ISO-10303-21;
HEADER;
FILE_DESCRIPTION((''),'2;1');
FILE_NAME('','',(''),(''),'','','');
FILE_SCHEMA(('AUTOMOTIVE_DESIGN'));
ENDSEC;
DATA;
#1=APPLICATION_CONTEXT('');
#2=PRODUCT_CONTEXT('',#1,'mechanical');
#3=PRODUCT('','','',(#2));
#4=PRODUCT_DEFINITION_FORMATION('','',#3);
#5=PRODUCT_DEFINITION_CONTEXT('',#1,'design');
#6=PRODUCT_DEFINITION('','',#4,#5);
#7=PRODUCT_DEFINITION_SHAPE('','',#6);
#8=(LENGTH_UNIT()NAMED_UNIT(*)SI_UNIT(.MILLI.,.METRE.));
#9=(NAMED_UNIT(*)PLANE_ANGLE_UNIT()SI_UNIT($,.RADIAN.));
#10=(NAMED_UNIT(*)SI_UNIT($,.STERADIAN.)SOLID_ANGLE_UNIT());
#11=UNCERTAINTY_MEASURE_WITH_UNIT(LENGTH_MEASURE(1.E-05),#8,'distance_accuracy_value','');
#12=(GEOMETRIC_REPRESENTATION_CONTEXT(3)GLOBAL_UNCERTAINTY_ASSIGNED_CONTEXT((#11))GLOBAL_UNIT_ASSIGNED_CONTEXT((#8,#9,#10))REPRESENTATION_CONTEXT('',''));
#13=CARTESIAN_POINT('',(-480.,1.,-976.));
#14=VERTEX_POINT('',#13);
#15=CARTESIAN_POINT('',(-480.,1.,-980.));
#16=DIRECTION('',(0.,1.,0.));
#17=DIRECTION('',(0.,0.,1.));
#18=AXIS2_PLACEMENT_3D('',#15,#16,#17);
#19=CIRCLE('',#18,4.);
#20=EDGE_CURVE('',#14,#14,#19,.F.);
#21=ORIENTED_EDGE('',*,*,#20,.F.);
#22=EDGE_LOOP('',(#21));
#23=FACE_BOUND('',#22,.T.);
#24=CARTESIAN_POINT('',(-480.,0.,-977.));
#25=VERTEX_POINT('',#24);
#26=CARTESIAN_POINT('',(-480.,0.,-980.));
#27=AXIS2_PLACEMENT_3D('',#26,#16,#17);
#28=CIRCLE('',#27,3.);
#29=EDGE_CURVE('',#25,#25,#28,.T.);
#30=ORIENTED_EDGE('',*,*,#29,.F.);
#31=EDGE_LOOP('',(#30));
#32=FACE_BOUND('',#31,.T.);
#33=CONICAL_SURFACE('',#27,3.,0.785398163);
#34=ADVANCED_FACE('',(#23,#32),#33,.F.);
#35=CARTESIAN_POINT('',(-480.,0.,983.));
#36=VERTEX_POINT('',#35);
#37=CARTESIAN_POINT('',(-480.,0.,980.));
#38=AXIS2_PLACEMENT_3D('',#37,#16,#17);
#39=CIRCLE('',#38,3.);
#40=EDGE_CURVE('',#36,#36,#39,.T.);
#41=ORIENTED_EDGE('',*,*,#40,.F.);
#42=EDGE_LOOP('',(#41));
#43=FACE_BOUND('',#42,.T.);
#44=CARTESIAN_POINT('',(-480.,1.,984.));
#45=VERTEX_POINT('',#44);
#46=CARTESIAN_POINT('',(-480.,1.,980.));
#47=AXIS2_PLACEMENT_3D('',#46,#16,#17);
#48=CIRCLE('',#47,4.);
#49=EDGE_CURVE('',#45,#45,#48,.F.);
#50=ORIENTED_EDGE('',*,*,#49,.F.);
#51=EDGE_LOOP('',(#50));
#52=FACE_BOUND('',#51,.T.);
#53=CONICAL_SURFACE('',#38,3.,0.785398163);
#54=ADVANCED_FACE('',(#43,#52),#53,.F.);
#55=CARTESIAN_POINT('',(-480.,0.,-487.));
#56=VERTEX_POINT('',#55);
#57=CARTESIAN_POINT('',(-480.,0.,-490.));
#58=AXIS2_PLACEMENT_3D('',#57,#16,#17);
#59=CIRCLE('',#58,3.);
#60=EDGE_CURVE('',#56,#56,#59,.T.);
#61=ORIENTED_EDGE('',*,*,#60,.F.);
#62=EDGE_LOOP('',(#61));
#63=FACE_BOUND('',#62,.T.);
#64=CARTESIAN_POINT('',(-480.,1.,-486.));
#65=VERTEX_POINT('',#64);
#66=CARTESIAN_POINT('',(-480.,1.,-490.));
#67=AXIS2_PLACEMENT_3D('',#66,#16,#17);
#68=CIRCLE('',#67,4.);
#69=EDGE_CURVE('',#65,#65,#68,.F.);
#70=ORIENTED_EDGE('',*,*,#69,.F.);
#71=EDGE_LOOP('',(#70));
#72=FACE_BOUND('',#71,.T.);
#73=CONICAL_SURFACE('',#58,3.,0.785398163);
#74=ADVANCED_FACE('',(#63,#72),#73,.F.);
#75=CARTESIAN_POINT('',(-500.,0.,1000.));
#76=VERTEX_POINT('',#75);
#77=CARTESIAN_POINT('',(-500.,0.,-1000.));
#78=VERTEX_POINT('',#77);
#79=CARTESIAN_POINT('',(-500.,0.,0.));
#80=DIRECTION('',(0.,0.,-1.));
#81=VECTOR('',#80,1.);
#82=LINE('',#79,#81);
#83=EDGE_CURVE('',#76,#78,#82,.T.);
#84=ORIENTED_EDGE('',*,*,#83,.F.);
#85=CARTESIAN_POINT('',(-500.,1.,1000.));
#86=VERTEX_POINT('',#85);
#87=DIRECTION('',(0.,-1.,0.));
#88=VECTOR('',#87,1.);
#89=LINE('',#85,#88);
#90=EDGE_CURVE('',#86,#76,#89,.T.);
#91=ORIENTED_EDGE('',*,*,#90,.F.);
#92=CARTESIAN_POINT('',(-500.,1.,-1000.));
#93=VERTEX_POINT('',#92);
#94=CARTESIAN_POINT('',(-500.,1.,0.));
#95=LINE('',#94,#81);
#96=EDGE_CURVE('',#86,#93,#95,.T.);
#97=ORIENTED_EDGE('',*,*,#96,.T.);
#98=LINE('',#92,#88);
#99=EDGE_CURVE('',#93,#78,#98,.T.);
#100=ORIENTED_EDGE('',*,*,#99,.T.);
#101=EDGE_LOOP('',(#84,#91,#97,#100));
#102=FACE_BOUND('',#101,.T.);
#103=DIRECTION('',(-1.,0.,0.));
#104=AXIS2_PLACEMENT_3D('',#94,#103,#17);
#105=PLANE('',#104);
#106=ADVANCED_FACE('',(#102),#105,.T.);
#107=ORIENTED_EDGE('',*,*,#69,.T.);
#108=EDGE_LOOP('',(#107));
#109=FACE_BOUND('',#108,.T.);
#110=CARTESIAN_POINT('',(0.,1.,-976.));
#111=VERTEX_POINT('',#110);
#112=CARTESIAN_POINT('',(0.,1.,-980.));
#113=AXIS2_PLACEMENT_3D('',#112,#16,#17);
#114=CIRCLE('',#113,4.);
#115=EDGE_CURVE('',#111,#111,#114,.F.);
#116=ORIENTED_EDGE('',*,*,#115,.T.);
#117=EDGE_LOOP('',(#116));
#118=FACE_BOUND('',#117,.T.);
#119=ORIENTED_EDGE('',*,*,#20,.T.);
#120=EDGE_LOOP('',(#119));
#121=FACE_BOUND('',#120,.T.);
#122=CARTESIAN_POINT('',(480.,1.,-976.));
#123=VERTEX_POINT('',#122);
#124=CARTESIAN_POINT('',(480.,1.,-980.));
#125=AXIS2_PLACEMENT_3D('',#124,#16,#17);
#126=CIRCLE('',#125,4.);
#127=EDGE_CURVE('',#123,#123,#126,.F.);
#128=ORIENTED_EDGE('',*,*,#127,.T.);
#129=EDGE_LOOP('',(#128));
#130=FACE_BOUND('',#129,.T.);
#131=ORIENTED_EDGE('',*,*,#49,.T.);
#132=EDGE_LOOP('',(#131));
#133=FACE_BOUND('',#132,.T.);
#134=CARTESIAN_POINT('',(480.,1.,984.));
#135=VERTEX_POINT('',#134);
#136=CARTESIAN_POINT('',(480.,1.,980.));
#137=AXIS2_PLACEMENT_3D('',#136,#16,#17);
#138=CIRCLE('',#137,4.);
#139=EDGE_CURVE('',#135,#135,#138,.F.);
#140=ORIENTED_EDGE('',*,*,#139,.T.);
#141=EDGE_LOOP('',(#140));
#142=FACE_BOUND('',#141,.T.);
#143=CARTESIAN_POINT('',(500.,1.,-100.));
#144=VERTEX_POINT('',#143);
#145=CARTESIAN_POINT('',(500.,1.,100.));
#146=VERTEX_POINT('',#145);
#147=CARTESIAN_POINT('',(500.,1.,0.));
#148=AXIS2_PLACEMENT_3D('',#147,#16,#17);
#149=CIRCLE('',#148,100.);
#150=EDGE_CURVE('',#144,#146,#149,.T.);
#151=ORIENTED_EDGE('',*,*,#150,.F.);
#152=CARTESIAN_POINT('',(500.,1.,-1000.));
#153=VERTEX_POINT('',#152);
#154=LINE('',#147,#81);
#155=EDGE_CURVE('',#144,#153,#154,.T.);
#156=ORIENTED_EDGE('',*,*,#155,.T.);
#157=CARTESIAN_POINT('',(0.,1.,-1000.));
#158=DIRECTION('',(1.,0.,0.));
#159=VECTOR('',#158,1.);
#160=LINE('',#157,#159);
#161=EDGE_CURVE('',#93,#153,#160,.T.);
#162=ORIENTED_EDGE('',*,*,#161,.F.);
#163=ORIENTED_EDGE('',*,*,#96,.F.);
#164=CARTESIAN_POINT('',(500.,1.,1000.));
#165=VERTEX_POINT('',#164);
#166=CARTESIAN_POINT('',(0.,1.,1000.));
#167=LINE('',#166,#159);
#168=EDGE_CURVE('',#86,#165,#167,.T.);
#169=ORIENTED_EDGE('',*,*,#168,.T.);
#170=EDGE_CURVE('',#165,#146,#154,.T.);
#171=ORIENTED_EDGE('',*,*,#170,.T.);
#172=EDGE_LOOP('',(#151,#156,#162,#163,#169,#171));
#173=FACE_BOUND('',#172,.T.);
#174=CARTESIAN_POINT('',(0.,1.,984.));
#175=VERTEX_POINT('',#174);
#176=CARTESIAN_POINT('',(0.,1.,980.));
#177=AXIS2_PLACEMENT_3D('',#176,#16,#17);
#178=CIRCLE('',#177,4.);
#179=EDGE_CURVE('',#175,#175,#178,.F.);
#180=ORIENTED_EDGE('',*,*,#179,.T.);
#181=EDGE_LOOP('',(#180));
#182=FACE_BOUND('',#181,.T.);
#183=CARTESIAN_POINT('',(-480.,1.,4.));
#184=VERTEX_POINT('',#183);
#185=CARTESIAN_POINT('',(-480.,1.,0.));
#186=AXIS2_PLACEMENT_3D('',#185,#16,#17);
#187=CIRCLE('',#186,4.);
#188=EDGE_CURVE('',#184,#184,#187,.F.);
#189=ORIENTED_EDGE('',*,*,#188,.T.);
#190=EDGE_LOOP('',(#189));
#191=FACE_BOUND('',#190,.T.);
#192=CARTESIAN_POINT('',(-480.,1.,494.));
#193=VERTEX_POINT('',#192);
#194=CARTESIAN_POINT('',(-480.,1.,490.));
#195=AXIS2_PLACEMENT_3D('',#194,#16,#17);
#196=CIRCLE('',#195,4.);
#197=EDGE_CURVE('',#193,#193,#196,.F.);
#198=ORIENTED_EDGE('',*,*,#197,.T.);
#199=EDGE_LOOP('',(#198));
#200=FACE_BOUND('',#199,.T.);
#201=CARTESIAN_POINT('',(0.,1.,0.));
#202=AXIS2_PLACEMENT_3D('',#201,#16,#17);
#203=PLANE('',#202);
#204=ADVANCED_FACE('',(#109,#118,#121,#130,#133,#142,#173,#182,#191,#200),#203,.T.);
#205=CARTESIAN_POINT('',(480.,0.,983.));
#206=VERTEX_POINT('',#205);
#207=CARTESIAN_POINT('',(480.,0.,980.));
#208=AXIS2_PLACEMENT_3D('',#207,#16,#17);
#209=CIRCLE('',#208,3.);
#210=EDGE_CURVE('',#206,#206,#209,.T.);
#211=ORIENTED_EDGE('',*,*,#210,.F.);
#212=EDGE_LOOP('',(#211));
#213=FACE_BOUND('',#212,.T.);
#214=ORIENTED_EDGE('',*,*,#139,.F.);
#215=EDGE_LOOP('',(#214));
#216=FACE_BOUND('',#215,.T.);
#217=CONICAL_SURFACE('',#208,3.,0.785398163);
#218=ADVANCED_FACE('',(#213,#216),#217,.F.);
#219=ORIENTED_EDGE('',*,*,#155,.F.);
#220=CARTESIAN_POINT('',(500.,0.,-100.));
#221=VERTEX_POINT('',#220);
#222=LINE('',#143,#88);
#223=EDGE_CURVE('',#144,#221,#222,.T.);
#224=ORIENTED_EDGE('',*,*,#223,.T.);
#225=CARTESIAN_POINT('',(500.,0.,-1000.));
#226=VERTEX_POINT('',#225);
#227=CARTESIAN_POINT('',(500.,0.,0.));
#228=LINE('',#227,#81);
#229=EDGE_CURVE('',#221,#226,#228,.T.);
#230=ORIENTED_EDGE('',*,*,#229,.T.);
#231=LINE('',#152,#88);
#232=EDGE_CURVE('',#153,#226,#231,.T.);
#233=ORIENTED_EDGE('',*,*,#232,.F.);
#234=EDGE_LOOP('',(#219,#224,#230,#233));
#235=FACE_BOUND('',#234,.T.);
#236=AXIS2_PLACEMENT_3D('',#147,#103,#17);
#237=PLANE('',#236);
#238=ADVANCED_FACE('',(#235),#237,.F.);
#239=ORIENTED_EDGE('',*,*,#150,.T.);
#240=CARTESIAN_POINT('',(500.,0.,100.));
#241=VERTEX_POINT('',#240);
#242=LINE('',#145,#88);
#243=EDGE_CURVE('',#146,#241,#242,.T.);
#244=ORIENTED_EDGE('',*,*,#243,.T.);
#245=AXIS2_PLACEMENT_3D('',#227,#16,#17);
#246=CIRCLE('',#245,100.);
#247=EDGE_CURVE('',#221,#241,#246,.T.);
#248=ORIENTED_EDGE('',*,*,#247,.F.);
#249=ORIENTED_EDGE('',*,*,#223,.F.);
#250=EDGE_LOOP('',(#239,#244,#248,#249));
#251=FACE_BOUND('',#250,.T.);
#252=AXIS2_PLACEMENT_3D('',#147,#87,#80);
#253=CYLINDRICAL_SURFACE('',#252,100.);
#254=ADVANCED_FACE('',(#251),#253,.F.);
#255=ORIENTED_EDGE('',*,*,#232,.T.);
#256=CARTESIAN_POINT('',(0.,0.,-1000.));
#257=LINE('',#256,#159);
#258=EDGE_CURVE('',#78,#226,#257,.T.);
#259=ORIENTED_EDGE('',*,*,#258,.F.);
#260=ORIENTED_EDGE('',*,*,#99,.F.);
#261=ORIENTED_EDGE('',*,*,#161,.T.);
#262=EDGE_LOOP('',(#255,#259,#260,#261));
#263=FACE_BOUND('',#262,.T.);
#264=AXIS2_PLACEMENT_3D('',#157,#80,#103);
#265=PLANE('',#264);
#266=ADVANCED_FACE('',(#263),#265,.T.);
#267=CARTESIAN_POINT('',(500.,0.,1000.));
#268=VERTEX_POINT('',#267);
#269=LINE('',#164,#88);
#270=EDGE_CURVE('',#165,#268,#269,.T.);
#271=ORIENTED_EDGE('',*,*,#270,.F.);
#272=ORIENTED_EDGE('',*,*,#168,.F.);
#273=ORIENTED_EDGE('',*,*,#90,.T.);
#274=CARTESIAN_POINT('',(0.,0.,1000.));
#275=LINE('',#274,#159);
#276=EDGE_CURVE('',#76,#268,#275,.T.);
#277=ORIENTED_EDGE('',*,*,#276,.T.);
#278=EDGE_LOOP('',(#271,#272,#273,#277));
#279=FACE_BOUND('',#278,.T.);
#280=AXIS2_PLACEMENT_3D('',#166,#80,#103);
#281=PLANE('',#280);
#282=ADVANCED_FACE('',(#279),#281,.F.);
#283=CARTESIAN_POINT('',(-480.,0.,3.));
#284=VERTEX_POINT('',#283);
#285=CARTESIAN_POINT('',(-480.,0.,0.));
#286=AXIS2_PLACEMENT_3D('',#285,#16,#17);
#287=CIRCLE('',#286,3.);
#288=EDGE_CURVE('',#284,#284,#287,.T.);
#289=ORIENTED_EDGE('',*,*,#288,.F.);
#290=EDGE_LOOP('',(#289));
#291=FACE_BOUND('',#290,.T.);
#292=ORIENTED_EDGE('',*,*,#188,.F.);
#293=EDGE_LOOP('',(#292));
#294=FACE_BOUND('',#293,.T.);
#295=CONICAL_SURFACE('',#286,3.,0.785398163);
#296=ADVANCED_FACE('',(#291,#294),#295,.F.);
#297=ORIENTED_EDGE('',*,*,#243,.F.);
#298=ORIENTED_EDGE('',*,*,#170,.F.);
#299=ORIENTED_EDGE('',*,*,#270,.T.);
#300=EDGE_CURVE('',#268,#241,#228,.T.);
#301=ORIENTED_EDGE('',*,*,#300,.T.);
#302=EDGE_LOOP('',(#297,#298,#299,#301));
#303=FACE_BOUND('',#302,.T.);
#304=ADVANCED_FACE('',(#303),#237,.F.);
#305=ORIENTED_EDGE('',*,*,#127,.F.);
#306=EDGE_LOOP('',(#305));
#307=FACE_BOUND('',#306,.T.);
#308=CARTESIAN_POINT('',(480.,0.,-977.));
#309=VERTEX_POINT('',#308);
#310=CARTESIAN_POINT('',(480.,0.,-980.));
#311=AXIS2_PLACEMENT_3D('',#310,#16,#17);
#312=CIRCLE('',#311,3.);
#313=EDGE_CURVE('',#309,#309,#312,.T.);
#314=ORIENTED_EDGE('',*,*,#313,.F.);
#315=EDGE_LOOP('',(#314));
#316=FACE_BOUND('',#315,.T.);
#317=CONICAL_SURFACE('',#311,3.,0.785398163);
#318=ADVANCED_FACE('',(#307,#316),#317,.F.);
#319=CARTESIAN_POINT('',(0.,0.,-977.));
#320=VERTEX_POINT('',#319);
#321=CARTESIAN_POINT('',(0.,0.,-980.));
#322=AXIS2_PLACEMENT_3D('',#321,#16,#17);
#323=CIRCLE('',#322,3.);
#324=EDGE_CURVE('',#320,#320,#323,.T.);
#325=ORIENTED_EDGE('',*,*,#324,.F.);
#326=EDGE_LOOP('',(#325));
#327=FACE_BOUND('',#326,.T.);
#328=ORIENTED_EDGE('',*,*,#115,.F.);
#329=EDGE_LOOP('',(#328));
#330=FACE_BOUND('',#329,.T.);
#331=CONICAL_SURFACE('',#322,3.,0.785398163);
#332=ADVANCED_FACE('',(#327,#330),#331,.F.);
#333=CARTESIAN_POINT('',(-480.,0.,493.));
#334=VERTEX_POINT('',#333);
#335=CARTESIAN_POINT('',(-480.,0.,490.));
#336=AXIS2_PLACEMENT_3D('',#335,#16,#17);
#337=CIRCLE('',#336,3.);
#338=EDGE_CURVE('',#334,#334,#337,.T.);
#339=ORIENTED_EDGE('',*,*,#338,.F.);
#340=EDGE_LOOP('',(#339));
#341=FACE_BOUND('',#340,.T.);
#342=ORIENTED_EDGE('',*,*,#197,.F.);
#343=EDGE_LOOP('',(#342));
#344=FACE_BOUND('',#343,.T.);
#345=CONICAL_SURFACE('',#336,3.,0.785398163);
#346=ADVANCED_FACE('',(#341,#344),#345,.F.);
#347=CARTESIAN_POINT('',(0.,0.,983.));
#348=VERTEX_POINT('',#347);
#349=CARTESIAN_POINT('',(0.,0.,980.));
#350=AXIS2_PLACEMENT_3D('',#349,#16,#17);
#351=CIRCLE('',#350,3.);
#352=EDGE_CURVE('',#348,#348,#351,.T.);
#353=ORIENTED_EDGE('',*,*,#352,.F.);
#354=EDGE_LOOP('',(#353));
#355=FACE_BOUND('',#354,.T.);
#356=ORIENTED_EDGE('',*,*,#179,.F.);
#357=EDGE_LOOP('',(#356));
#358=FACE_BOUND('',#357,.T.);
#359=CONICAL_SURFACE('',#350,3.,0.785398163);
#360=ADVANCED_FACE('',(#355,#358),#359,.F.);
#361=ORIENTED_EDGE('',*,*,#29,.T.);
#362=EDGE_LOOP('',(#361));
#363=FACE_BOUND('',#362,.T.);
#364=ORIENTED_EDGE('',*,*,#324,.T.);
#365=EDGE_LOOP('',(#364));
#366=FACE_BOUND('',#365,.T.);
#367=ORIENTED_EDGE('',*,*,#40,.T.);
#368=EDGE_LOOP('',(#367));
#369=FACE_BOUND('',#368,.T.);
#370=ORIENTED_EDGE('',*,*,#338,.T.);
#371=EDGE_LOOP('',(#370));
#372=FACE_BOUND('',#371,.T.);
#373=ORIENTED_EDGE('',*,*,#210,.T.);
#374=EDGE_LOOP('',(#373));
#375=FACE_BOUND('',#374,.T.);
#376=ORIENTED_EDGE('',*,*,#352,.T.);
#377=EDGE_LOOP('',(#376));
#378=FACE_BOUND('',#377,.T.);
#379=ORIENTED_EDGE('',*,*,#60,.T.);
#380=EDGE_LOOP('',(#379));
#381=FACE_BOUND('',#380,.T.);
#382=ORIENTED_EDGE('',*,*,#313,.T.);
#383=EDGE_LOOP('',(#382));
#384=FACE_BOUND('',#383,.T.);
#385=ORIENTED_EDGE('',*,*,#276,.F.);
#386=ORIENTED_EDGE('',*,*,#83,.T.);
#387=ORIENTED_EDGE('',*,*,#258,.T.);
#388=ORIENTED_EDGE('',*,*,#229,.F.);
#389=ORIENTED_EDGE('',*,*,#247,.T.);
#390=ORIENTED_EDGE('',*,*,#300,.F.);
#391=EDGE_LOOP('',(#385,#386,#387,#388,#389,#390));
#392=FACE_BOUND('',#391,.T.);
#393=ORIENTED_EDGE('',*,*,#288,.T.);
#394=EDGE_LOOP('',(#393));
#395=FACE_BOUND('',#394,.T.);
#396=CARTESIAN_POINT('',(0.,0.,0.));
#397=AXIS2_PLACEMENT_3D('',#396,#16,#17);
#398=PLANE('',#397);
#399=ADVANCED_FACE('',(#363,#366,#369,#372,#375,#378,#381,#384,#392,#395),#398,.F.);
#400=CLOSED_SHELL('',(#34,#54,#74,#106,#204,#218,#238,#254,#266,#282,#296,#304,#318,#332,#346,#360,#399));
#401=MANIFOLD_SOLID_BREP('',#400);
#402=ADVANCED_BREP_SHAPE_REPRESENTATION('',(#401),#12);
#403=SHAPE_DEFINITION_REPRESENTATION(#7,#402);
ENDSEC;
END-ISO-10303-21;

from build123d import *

# Parameters (mm, degrees)
SKETCH1_R           = 3
BOSS_EXTRUDE1_DEPTH = 1
CHAMFER1_SIZE       = 1


with BuildPart() as part:
    # Sketch1 → Boss-Extrude1 (new body)
    with BuildSketch(Plane(origin=(0, 0, 0), x_dir=(1, 0, 0), z_dir=(0, 1, 0))):
        with BuildLine():
            Line((-500, -1000), (500, -1000))
            Line((500, -1000), (500, -100))
            ThreePointArc((500, -100), (400, 0), (500, 100))
            Line((500, 100), (500, 1000))
            Line((500, 1000), (-500, 1000))
            Line((-500, 1000), (-500, -1000))
        make_face()
        with Locations(Location((-480, 490, 0), (0, 0, 270))):
            Circle(SKETCH1_R, mode=Mode.SUBTRACT)
        with Locations(Location((-480, -980, 0), (0, 0, 270))):
            Circle(SKETCH1_R, mode=Mode.SUBTRACT)
        with Locations(Location((480, -980, 0), (0, 0, 270))):
            Circle(SKETCH1_R, mode=Mode.SUBTRACT)
        with Locations(Location((480, 980, 0), (0, 0, 270))):
            Circle(SKETCH1_R, mode=Mode.SUBTRACT)
        with Locations(Location((-480, 980, 0), (0, 0, 270))):
            Circle(SKETCH1_R, mode=Mode.SUBTRACT)
        with Locations(Location((-480, 0, 0), (0, 0, 270))):
            Circle(SKETCH1_R, mode=Mode.SUBTRACT)
        with Locations(Location((-480, -490, 0), (0, 0, 270))):
            Circle(SKETCH1_R, mode=Mode.SUBTRACT)
        with Locations(Location((0, -980, 0), (0, 0, 270))):
            Circle(SKETCH1_R, mode=Mode.SUBTRACT)
        with Locations(Location((0, 980, 0), (0, 0, 270))):
            Circle(SKETCH1_R, mode=Mode.SUBTRACT)
    extrude(amount=BOSS_EXTRUDE1_DEPTH)

    # Chamfer1
    chamfer1_edges = [part.edges().sort_by_distance(p)[0] for p in [
        (0, 1, -983),
        (0, 1, 977),
        (-480, 1, 487),
        (-480, 1, -3),
        (-480, 1, -983),
        (480, 1, -983),
        (480, 1, 977),
        (-480, 1, 977),
        (-480, 1, -493),
    ]]
    chamfer(chamfer1_edges, length=CHAMFER1_SIZE - 0.0001)  # a hair under: the kernel refuses the full size


solid = part.part
